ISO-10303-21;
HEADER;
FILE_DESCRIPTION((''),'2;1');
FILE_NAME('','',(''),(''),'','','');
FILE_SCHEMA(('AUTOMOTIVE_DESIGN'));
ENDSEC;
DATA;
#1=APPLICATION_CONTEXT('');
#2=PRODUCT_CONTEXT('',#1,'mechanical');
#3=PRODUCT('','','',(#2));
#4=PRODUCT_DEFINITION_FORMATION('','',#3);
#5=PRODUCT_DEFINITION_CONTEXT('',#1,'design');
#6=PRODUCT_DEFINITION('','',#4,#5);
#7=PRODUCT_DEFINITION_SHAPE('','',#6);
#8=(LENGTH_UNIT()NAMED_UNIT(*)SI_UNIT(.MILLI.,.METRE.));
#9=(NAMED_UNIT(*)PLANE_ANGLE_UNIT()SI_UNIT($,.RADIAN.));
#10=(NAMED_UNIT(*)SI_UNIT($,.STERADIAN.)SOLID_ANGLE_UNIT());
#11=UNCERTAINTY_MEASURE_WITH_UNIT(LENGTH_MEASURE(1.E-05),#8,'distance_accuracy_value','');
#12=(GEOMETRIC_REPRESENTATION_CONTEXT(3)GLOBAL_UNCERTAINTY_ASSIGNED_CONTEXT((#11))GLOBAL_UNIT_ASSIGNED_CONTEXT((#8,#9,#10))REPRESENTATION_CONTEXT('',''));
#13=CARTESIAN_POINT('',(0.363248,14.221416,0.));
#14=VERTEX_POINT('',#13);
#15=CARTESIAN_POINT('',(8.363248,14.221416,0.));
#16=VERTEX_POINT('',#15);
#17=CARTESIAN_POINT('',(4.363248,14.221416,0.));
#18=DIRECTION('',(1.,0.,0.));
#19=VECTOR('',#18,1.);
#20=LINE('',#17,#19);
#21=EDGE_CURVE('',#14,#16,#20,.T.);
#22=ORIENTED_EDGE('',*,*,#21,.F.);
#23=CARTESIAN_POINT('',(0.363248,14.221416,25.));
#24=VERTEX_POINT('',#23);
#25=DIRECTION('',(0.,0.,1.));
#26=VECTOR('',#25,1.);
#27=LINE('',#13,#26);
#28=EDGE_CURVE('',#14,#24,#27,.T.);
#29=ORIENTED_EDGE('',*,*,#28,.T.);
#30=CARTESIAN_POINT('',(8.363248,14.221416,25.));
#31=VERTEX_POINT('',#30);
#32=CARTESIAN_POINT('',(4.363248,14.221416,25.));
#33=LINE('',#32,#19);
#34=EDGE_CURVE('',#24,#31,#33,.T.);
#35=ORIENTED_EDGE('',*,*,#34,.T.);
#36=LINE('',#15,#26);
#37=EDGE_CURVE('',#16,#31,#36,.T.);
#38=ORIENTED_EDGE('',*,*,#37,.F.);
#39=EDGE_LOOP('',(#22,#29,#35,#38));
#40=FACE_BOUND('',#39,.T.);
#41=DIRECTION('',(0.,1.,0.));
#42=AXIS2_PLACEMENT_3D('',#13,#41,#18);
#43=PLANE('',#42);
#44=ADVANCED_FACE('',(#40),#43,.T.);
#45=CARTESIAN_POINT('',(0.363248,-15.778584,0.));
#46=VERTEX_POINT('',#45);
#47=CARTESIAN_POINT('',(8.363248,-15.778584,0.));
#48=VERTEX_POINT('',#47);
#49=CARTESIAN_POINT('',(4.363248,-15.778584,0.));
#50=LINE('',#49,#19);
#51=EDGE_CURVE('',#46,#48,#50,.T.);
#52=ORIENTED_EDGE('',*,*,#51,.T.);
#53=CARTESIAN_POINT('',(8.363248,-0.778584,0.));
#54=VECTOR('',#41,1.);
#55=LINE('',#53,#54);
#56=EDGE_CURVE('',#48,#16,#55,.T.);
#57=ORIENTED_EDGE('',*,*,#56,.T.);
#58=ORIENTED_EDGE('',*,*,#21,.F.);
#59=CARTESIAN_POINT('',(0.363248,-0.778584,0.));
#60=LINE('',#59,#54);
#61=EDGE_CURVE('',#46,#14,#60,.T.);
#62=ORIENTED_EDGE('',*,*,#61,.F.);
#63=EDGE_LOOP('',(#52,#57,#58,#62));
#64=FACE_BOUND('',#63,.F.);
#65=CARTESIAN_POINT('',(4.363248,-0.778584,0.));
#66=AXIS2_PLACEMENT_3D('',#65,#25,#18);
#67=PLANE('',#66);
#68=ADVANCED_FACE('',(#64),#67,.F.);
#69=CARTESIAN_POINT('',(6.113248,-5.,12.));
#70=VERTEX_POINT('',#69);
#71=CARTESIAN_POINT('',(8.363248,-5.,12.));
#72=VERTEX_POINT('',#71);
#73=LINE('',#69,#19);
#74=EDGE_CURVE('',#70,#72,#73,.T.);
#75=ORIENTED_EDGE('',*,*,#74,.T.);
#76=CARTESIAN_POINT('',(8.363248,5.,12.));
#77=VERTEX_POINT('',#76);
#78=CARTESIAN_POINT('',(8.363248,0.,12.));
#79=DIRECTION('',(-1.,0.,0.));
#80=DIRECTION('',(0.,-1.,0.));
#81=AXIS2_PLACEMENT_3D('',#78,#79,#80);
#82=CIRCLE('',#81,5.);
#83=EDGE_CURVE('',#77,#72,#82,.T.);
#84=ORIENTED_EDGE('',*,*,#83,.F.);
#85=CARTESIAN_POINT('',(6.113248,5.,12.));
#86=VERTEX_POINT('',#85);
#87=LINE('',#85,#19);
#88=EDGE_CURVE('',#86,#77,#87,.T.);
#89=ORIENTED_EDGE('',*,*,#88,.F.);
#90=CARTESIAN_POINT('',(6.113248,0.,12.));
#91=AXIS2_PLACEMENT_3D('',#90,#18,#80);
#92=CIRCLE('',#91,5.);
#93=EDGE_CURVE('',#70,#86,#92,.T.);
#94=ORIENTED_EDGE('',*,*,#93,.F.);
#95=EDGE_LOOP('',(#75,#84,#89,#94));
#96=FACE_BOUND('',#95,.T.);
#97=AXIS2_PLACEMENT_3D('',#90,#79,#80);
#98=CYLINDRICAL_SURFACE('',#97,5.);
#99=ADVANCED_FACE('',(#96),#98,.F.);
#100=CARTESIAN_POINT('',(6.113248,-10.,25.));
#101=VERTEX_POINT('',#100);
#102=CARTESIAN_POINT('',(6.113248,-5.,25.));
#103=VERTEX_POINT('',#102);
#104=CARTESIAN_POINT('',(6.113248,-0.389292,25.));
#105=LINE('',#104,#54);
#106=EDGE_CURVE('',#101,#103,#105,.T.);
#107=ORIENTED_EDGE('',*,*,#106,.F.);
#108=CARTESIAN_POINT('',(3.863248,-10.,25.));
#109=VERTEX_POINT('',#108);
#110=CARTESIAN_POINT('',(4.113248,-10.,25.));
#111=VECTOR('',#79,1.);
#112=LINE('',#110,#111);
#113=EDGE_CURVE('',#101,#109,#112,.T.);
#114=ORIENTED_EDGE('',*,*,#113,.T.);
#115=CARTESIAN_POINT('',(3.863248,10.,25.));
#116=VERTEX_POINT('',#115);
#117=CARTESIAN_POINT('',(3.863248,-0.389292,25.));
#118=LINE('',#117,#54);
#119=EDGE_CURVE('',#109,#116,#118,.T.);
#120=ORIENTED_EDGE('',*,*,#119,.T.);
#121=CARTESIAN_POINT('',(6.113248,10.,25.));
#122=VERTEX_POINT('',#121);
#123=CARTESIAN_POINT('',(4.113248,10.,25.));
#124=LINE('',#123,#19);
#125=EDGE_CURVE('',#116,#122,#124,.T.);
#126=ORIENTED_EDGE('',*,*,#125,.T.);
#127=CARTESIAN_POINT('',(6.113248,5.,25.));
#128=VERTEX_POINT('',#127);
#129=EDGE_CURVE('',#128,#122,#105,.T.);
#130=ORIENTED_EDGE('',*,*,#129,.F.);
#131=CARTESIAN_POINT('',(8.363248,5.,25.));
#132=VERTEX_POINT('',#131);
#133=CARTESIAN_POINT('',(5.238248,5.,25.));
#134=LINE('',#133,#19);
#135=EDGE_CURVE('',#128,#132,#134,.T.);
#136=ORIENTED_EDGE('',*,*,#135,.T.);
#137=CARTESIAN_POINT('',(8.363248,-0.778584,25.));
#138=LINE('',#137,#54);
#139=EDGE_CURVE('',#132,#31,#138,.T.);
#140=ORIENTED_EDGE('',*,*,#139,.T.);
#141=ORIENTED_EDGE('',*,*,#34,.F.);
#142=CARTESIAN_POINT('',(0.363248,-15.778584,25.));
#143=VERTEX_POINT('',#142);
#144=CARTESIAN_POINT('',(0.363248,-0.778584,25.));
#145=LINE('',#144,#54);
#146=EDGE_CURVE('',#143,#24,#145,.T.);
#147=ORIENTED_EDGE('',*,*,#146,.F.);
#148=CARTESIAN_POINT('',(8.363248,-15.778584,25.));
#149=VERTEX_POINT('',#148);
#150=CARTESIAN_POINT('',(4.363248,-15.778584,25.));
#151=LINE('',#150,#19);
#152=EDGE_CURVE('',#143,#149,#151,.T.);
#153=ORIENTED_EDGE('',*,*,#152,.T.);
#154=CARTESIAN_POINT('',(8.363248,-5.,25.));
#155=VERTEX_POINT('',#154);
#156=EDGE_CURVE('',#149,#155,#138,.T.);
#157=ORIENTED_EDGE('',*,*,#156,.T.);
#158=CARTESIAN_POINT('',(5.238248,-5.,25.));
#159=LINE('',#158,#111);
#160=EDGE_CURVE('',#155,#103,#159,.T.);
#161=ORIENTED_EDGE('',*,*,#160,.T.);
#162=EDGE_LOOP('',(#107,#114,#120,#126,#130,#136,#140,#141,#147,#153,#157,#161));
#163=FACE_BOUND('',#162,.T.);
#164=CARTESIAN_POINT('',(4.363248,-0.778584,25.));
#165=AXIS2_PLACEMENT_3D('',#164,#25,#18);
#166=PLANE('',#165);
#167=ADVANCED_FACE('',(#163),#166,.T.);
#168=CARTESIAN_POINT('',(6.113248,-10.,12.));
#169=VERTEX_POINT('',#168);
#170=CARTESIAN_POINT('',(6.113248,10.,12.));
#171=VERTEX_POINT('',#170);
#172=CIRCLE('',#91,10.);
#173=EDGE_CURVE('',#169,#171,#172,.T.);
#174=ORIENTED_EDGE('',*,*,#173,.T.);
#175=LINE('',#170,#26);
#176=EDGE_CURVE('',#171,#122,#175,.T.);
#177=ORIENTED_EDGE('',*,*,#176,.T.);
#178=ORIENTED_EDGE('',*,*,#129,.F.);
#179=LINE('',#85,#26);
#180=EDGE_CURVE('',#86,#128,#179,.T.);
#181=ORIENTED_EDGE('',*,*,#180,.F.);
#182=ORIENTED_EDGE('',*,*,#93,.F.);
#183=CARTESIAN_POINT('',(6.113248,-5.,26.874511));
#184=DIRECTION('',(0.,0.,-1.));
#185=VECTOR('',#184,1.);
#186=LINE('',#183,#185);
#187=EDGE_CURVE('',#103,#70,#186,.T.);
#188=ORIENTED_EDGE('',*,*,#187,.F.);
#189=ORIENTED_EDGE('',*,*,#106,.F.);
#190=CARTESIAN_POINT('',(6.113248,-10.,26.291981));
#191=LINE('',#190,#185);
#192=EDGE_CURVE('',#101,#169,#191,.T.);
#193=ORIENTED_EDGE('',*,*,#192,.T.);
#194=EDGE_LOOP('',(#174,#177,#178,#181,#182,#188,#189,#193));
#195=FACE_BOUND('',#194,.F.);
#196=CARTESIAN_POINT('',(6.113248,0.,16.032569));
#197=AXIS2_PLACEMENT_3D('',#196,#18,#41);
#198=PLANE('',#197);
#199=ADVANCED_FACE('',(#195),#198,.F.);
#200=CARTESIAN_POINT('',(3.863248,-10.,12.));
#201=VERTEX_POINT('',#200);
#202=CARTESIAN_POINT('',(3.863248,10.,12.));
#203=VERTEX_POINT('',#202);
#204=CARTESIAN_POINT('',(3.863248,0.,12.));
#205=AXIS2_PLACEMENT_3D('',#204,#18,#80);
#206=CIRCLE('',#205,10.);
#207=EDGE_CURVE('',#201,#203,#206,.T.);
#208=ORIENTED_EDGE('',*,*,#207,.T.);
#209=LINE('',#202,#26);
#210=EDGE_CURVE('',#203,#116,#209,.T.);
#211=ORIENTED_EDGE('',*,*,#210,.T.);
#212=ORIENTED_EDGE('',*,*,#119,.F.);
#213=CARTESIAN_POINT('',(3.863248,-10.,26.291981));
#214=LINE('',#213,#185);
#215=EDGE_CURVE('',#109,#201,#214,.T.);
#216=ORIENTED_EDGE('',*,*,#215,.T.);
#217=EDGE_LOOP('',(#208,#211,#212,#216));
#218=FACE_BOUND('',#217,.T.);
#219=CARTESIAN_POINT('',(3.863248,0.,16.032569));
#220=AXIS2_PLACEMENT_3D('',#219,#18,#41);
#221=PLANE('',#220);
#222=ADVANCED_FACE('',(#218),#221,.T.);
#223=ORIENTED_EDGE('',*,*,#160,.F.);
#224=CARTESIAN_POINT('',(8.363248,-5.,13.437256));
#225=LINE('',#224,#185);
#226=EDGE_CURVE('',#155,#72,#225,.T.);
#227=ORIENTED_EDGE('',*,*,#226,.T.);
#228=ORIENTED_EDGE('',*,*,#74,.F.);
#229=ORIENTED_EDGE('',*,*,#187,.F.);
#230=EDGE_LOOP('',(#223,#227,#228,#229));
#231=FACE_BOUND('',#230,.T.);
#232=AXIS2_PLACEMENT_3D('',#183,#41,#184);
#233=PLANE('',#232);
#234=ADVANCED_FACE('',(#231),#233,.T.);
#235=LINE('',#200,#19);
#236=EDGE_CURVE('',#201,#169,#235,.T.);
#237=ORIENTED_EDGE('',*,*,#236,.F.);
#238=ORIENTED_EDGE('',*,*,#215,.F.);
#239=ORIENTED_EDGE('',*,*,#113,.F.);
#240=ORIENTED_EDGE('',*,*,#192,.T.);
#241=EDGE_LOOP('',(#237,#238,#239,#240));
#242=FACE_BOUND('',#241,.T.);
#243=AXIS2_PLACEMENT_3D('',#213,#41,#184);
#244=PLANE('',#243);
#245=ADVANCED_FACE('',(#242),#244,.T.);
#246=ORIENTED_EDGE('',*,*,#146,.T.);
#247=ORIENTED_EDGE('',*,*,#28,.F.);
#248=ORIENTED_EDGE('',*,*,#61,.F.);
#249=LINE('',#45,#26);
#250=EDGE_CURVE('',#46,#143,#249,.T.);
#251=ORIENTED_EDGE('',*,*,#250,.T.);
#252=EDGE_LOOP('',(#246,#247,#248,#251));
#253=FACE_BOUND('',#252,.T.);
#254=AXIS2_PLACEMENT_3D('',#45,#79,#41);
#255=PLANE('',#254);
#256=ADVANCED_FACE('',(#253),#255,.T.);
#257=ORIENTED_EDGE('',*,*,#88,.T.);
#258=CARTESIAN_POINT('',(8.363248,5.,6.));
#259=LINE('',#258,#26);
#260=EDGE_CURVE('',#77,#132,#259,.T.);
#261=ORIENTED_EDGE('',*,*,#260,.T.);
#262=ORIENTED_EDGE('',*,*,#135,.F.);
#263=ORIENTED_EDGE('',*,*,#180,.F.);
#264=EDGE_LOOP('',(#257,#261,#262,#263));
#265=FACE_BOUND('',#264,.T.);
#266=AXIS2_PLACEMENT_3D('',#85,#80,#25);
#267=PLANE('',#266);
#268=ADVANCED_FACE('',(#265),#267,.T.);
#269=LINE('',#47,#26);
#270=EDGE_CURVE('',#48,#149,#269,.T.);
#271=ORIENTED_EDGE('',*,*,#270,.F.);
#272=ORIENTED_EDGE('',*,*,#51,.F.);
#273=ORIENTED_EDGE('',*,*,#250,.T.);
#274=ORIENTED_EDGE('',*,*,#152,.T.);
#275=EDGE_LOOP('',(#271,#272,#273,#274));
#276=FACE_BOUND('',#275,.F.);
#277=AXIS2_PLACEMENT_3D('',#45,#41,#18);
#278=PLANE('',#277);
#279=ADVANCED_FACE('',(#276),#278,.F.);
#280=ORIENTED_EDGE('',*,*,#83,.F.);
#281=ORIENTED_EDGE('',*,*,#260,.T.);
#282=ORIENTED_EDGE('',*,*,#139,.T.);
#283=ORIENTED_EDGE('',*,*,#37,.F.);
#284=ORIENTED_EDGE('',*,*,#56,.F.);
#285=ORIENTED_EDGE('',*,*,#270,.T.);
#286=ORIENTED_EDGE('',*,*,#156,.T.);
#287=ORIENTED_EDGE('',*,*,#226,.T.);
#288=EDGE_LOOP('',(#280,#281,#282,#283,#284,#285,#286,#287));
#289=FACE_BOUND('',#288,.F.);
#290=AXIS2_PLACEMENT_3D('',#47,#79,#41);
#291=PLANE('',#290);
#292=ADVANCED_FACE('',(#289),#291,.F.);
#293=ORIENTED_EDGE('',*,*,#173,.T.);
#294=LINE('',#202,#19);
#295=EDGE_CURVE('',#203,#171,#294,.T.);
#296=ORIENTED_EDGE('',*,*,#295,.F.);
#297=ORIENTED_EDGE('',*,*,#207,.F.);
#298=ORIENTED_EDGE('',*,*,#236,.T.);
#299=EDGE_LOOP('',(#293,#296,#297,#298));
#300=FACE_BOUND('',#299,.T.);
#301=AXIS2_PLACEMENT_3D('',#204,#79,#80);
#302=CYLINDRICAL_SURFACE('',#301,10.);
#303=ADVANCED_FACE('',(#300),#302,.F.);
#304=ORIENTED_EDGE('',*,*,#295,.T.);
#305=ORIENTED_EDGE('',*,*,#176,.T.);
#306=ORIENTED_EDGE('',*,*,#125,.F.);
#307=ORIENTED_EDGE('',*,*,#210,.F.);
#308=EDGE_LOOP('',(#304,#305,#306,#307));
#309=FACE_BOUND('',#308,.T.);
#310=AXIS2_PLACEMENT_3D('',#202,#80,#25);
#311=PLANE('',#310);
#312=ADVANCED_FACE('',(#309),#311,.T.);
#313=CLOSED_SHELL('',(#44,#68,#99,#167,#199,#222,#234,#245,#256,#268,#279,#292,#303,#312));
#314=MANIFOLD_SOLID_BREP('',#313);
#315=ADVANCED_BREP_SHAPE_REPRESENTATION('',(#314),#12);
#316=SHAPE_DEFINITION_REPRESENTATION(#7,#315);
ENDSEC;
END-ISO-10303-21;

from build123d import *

# Parameters (mm, degrees)
F0_W     = 8
F0_H     = 30
F1_DEPTH = 25
F5_DEPTH = 2.25
F7_DEPTH = 2.251


# Not quite as in the source:
# - a feature of the source that left no trace in its solid (it failed there, or was rolled back) is left out


with BuildPart() as f1:
    # F0 (on Top) → F1 (new body)
    with BuildSketch(Plane.XY):
        with Locations((4.3632484525, -0.778583717)):
            Rectangle(F0_W, F0_H)
    extrude(amount=F1_DEPTH)

    # F4 (on offset) → F5 (cut, through all)
    with BuildSketch(Plane.YZ.offset(3.8632484525)):
        with BuildLine():
            Line((-10, 26.291980999), (-10, 12))
            ThreePointArc((-10, 12), (0, 2), (10, 12))
            Line((10, 12), (10, 26.291980999))
            Line((10, 26.291980999), (-10, 26.291980999))
        make_face()
    extrude(amount=F5_DEPTH, mode=Mode.SUBTRACT)

    # F6 (on offset) → F7 (cut, through all)
    with BuildSketch(Plane.YZ.offset(6.1132484525)):
        with BuildLine():
            Line((-5, 26.8745111924), (-5, 12))
            ThreePointArc((-5, 12), (0, 7), (5, 12))
            Line((5, 12), (5, 26.8745111924))
            Line((5, 26.8745111924), (-5, 26.8745111924))
        make_face()
    extrude(amount=F7_DEPTH, mode=Mode.SUBTRACT)


solid = f1.part
